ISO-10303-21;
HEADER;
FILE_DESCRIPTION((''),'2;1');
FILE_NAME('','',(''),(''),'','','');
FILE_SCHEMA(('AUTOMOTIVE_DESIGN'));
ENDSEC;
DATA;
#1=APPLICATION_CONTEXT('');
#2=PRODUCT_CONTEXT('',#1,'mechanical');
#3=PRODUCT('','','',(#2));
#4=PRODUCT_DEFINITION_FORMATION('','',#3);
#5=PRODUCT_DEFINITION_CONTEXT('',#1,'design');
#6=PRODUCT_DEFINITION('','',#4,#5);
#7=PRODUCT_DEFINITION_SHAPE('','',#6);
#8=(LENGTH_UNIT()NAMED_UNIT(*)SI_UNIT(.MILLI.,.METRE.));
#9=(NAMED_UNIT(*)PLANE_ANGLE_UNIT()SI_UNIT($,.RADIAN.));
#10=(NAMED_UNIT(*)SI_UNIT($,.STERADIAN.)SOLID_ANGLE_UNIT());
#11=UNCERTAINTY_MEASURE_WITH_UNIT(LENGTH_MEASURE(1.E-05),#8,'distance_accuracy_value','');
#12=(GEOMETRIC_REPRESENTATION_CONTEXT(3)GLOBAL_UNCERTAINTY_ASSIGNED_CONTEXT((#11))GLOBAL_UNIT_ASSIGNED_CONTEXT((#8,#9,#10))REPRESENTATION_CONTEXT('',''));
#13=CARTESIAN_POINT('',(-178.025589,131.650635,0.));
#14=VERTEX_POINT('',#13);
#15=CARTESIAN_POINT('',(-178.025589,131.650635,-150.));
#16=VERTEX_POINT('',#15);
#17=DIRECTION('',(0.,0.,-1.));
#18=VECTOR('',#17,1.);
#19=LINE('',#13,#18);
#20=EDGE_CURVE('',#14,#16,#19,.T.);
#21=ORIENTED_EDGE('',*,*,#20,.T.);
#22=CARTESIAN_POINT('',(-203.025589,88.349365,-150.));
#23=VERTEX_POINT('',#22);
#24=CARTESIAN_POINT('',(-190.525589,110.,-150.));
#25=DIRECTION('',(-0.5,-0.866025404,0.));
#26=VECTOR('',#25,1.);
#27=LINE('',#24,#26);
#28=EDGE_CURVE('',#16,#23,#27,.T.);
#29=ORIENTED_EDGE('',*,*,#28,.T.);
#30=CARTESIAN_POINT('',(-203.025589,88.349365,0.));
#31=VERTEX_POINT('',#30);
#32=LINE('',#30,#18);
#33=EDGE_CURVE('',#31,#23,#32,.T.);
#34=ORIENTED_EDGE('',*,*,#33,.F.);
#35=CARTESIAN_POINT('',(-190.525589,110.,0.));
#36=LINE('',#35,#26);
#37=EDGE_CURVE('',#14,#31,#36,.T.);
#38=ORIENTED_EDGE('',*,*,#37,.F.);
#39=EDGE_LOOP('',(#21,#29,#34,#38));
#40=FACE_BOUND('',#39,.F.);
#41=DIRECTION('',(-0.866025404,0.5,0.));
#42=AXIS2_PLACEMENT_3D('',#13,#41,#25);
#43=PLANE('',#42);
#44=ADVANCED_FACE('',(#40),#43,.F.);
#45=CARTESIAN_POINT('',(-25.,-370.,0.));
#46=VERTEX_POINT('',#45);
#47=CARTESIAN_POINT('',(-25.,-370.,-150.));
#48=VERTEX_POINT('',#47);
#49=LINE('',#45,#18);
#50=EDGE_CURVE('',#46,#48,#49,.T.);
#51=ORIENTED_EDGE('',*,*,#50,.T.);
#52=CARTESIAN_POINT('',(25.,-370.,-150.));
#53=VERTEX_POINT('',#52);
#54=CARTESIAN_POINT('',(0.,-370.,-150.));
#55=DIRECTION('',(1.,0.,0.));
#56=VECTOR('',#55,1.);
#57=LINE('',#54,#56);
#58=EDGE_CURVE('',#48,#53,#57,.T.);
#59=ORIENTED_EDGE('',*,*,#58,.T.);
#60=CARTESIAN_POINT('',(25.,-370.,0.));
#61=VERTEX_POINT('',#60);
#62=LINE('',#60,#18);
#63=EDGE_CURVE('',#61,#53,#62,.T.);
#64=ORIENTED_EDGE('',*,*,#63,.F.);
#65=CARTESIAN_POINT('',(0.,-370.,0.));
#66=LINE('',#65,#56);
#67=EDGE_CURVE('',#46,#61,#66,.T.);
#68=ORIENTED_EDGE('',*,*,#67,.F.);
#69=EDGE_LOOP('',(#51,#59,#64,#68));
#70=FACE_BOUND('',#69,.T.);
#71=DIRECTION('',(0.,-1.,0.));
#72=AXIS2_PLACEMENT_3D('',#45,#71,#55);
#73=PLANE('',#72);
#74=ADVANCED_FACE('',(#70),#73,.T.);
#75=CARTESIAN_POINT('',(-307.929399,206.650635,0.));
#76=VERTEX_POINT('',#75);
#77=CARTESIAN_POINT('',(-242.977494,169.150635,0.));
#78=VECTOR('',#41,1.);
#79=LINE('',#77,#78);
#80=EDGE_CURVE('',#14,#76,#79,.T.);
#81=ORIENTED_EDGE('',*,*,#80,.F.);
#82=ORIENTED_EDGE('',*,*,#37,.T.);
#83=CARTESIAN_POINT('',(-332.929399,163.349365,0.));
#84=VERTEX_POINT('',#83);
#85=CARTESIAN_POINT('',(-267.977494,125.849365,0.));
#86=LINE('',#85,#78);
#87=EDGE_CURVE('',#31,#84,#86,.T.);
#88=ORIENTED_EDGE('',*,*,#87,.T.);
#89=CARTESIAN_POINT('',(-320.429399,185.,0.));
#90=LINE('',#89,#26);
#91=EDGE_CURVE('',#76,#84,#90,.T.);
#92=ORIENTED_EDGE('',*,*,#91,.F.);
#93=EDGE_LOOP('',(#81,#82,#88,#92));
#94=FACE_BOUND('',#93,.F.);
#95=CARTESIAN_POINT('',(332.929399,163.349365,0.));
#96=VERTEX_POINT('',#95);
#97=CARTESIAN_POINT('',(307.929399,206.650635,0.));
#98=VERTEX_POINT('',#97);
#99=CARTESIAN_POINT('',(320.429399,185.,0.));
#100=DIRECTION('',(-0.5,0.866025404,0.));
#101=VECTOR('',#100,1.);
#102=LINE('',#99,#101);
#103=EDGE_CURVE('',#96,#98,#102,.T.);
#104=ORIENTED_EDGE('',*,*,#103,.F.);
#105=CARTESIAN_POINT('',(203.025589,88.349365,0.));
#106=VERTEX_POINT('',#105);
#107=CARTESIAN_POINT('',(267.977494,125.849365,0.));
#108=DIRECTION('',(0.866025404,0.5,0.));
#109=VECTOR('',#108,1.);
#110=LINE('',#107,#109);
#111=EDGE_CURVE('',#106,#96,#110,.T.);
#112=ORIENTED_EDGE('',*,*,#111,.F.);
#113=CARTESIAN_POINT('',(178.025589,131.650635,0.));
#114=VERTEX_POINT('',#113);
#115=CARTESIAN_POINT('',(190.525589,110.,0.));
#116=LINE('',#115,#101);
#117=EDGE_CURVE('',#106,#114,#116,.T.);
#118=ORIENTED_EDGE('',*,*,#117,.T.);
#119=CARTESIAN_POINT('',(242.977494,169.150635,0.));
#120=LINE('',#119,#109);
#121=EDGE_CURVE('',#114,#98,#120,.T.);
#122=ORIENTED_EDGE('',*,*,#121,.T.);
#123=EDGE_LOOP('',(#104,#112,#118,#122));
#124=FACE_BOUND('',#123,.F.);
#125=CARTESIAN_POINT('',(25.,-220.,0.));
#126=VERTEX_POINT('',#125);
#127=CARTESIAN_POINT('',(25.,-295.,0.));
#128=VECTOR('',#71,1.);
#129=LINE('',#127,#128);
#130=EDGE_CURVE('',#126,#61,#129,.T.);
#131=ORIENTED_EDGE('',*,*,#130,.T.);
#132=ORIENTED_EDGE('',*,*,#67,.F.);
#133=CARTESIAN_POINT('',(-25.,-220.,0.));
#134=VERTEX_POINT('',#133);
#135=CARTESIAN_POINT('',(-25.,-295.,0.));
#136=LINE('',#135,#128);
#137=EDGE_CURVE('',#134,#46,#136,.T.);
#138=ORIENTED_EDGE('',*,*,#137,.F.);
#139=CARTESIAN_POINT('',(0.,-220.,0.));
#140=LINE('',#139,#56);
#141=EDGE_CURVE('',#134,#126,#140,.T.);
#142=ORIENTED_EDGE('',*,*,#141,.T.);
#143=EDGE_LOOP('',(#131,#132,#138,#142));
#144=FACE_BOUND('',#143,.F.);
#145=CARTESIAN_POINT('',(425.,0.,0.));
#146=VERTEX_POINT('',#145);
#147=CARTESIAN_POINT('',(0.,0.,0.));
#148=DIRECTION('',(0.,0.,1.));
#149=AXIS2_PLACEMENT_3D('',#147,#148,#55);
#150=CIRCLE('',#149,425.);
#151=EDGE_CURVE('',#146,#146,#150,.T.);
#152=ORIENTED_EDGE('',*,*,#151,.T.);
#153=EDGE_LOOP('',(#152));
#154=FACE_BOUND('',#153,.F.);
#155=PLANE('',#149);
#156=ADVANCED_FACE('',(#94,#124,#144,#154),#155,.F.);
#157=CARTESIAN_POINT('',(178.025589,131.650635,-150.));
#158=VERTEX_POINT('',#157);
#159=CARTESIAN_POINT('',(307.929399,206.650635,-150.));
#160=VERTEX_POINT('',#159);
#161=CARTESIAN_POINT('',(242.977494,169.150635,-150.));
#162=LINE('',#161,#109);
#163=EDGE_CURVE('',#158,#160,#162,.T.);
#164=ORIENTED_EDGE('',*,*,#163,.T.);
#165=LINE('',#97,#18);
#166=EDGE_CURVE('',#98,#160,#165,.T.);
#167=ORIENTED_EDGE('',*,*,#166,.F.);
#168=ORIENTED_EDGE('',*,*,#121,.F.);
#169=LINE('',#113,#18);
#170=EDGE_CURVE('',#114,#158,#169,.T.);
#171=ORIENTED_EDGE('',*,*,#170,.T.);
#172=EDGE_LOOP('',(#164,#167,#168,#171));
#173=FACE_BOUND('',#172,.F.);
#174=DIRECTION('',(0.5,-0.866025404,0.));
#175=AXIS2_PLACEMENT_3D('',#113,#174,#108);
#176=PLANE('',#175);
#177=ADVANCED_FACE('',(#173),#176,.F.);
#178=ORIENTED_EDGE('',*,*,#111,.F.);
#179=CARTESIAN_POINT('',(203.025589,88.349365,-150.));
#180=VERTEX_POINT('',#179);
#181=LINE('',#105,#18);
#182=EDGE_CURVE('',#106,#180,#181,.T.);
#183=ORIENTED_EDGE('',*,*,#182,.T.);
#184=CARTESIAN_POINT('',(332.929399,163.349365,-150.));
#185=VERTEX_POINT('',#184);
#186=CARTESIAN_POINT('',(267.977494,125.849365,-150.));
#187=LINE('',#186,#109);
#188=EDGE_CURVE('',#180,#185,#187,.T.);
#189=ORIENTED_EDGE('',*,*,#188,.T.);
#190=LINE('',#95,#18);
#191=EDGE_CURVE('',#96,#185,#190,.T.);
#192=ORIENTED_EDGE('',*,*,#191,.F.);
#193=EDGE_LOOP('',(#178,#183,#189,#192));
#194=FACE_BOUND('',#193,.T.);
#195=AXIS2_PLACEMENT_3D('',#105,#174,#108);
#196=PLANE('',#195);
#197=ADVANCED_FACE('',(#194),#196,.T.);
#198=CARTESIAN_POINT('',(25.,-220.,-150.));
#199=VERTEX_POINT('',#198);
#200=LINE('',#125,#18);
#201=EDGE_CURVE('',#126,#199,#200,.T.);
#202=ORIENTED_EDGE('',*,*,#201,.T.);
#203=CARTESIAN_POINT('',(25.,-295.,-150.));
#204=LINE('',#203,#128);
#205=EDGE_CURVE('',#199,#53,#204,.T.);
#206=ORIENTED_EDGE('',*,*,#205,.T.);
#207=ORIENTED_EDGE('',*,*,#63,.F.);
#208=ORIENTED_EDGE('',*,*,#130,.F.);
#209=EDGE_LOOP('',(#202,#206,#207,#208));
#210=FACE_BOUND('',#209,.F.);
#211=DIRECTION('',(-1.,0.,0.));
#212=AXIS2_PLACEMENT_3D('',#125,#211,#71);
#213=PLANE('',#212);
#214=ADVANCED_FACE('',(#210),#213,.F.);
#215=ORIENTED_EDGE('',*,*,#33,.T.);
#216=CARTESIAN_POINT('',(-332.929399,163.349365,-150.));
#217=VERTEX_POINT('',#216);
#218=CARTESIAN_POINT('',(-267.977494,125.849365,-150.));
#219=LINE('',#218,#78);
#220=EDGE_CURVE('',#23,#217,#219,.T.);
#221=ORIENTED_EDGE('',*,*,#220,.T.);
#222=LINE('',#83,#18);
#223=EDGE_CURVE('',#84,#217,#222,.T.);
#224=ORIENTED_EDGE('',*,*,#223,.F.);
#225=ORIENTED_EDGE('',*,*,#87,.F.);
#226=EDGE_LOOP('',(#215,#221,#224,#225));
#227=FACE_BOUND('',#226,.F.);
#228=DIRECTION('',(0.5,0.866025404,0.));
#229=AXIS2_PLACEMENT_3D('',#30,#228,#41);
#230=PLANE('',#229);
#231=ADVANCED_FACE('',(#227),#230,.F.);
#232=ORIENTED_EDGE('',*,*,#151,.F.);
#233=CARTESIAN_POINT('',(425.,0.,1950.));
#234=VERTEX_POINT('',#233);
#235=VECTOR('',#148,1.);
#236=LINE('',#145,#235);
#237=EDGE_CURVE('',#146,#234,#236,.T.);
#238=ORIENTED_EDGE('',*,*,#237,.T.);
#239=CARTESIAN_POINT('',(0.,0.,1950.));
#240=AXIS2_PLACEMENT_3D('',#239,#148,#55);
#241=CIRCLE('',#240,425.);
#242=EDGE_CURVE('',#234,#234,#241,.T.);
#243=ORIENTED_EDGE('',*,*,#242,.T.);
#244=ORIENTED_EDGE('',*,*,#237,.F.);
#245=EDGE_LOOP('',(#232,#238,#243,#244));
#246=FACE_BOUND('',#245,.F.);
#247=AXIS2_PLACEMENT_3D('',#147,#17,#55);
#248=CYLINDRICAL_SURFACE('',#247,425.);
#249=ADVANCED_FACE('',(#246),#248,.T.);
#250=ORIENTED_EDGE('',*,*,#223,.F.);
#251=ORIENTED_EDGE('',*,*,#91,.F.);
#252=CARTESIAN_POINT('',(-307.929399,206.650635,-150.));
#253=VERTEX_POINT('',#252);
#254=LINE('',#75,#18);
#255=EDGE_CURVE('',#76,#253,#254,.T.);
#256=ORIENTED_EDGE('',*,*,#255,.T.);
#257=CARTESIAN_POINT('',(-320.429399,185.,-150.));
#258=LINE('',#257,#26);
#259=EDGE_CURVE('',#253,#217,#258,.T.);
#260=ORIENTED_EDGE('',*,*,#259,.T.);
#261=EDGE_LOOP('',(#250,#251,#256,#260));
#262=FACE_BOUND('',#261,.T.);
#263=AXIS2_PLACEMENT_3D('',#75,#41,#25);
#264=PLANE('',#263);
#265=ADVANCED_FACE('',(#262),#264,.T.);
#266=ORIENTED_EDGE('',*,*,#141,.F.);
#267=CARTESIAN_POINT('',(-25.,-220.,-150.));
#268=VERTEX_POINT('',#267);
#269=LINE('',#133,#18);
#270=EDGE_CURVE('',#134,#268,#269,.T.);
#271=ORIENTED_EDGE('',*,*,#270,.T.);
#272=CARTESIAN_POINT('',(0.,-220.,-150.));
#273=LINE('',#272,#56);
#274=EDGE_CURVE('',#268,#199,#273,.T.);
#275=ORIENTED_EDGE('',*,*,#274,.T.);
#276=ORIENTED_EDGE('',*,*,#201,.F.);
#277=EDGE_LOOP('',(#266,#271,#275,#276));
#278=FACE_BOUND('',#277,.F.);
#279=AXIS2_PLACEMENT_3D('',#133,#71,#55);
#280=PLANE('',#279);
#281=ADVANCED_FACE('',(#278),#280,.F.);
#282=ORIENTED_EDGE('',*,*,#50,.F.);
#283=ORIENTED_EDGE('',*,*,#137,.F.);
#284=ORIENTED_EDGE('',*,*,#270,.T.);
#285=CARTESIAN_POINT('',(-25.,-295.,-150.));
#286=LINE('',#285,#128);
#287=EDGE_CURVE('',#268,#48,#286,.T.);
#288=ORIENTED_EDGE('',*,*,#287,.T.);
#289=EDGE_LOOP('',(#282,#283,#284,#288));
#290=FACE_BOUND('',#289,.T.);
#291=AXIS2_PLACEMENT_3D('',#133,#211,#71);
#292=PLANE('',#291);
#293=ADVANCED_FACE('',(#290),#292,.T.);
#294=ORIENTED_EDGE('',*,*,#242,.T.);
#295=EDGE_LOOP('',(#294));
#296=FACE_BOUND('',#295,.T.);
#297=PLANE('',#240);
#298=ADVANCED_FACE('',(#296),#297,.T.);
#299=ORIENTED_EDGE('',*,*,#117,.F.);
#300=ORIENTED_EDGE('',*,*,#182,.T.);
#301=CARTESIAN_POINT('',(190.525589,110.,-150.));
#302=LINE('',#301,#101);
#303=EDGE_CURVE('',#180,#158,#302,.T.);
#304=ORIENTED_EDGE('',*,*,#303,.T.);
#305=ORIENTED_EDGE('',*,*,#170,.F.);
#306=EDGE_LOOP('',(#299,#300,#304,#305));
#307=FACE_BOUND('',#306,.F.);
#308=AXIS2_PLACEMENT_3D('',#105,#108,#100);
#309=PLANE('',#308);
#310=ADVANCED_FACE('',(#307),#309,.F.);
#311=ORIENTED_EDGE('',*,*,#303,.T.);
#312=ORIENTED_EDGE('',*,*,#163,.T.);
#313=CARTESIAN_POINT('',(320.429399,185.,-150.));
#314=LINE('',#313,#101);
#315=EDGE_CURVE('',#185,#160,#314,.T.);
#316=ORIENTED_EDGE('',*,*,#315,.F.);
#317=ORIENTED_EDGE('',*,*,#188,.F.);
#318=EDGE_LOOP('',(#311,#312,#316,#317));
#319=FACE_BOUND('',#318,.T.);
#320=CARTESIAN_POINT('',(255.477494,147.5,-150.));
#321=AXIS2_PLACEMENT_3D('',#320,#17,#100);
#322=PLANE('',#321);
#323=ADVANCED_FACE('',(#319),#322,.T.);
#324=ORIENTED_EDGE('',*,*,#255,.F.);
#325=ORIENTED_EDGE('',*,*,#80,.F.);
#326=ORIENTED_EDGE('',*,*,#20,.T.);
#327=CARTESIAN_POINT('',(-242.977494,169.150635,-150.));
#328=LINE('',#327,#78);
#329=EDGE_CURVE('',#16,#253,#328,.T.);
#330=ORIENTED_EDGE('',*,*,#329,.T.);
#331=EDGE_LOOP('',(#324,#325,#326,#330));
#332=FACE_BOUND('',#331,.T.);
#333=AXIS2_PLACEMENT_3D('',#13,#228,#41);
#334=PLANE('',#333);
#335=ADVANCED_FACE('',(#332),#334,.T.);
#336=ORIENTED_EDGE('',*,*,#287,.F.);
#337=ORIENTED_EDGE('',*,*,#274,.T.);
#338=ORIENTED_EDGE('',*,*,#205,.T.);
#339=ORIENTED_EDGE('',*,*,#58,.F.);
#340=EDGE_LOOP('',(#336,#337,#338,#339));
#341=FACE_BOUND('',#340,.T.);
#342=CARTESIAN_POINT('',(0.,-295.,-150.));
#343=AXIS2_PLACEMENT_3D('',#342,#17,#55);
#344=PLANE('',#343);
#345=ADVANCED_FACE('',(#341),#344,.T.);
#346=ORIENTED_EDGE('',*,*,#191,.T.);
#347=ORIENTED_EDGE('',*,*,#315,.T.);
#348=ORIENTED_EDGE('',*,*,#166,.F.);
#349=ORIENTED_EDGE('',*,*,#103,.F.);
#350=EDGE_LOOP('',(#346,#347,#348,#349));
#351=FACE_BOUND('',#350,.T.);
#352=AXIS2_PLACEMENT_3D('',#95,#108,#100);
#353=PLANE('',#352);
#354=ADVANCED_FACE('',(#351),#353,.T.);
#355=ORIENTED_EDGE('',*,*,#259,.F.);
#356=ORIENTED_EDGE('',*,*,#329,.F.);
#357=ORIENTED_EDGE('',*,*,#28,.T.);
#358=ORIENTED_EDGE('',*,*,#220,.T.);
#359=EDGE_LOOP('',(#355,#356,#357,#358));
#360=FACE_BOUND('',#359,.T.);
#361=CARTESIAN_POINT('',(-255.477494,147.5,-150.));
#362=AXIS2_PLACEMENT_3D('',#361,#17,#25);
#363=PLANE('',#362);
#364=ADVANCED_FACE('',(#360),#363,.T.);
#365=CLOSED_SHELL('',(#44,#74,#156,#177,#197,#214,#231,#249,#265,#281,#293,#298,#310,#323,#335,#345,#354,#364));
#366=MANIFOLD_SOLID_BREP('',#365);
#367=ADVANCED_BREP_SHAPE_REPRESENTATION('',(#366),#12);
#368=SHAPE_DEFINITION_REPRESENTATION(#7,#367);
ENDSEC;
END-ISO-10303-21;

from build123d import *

# Parameters (mm, degrees)
F0_R            = 425
F1_DEPTH        = 1950
F2_W            = 50
F2_H            = 150
F3_DEPTH        = 150
F3_COPIES_COUNT = 3


# Not quite as in the source:
# - a pattern or mirror of a feature is missing from the dataset's text; its kind, count and spacing are read off the source's solid


with BuildPart() as f1:
    # F0 (on Top) → F1 (new body)
    with BuildSketch(Plane.XY):
        Circle(F0_R)
    extrude(amount=F1_DEPTH)

    # F2 (on face) → F3 (join)
    with BuildSketch(Plane(origin=(0, 0, 0), x_dir=(1, 0, 0), z_dir=(0, 0, -1))):
        with Locations((0, 295)):
            Rectangle(F2_W, F2_H)
    f3 = extrude(amount=F3_DEPTH)

    # F3_copies: F3 ×3 about axis
    f3_copies_axis = Axis((0, 0, 0), (0, 0, 1))
    for i in range(1, F3_COPIES_COUNT):
        add(f3.rotate(f3_copies_axis, i * 360 / F3_COPIES_COUNT))


solid = f1.part
